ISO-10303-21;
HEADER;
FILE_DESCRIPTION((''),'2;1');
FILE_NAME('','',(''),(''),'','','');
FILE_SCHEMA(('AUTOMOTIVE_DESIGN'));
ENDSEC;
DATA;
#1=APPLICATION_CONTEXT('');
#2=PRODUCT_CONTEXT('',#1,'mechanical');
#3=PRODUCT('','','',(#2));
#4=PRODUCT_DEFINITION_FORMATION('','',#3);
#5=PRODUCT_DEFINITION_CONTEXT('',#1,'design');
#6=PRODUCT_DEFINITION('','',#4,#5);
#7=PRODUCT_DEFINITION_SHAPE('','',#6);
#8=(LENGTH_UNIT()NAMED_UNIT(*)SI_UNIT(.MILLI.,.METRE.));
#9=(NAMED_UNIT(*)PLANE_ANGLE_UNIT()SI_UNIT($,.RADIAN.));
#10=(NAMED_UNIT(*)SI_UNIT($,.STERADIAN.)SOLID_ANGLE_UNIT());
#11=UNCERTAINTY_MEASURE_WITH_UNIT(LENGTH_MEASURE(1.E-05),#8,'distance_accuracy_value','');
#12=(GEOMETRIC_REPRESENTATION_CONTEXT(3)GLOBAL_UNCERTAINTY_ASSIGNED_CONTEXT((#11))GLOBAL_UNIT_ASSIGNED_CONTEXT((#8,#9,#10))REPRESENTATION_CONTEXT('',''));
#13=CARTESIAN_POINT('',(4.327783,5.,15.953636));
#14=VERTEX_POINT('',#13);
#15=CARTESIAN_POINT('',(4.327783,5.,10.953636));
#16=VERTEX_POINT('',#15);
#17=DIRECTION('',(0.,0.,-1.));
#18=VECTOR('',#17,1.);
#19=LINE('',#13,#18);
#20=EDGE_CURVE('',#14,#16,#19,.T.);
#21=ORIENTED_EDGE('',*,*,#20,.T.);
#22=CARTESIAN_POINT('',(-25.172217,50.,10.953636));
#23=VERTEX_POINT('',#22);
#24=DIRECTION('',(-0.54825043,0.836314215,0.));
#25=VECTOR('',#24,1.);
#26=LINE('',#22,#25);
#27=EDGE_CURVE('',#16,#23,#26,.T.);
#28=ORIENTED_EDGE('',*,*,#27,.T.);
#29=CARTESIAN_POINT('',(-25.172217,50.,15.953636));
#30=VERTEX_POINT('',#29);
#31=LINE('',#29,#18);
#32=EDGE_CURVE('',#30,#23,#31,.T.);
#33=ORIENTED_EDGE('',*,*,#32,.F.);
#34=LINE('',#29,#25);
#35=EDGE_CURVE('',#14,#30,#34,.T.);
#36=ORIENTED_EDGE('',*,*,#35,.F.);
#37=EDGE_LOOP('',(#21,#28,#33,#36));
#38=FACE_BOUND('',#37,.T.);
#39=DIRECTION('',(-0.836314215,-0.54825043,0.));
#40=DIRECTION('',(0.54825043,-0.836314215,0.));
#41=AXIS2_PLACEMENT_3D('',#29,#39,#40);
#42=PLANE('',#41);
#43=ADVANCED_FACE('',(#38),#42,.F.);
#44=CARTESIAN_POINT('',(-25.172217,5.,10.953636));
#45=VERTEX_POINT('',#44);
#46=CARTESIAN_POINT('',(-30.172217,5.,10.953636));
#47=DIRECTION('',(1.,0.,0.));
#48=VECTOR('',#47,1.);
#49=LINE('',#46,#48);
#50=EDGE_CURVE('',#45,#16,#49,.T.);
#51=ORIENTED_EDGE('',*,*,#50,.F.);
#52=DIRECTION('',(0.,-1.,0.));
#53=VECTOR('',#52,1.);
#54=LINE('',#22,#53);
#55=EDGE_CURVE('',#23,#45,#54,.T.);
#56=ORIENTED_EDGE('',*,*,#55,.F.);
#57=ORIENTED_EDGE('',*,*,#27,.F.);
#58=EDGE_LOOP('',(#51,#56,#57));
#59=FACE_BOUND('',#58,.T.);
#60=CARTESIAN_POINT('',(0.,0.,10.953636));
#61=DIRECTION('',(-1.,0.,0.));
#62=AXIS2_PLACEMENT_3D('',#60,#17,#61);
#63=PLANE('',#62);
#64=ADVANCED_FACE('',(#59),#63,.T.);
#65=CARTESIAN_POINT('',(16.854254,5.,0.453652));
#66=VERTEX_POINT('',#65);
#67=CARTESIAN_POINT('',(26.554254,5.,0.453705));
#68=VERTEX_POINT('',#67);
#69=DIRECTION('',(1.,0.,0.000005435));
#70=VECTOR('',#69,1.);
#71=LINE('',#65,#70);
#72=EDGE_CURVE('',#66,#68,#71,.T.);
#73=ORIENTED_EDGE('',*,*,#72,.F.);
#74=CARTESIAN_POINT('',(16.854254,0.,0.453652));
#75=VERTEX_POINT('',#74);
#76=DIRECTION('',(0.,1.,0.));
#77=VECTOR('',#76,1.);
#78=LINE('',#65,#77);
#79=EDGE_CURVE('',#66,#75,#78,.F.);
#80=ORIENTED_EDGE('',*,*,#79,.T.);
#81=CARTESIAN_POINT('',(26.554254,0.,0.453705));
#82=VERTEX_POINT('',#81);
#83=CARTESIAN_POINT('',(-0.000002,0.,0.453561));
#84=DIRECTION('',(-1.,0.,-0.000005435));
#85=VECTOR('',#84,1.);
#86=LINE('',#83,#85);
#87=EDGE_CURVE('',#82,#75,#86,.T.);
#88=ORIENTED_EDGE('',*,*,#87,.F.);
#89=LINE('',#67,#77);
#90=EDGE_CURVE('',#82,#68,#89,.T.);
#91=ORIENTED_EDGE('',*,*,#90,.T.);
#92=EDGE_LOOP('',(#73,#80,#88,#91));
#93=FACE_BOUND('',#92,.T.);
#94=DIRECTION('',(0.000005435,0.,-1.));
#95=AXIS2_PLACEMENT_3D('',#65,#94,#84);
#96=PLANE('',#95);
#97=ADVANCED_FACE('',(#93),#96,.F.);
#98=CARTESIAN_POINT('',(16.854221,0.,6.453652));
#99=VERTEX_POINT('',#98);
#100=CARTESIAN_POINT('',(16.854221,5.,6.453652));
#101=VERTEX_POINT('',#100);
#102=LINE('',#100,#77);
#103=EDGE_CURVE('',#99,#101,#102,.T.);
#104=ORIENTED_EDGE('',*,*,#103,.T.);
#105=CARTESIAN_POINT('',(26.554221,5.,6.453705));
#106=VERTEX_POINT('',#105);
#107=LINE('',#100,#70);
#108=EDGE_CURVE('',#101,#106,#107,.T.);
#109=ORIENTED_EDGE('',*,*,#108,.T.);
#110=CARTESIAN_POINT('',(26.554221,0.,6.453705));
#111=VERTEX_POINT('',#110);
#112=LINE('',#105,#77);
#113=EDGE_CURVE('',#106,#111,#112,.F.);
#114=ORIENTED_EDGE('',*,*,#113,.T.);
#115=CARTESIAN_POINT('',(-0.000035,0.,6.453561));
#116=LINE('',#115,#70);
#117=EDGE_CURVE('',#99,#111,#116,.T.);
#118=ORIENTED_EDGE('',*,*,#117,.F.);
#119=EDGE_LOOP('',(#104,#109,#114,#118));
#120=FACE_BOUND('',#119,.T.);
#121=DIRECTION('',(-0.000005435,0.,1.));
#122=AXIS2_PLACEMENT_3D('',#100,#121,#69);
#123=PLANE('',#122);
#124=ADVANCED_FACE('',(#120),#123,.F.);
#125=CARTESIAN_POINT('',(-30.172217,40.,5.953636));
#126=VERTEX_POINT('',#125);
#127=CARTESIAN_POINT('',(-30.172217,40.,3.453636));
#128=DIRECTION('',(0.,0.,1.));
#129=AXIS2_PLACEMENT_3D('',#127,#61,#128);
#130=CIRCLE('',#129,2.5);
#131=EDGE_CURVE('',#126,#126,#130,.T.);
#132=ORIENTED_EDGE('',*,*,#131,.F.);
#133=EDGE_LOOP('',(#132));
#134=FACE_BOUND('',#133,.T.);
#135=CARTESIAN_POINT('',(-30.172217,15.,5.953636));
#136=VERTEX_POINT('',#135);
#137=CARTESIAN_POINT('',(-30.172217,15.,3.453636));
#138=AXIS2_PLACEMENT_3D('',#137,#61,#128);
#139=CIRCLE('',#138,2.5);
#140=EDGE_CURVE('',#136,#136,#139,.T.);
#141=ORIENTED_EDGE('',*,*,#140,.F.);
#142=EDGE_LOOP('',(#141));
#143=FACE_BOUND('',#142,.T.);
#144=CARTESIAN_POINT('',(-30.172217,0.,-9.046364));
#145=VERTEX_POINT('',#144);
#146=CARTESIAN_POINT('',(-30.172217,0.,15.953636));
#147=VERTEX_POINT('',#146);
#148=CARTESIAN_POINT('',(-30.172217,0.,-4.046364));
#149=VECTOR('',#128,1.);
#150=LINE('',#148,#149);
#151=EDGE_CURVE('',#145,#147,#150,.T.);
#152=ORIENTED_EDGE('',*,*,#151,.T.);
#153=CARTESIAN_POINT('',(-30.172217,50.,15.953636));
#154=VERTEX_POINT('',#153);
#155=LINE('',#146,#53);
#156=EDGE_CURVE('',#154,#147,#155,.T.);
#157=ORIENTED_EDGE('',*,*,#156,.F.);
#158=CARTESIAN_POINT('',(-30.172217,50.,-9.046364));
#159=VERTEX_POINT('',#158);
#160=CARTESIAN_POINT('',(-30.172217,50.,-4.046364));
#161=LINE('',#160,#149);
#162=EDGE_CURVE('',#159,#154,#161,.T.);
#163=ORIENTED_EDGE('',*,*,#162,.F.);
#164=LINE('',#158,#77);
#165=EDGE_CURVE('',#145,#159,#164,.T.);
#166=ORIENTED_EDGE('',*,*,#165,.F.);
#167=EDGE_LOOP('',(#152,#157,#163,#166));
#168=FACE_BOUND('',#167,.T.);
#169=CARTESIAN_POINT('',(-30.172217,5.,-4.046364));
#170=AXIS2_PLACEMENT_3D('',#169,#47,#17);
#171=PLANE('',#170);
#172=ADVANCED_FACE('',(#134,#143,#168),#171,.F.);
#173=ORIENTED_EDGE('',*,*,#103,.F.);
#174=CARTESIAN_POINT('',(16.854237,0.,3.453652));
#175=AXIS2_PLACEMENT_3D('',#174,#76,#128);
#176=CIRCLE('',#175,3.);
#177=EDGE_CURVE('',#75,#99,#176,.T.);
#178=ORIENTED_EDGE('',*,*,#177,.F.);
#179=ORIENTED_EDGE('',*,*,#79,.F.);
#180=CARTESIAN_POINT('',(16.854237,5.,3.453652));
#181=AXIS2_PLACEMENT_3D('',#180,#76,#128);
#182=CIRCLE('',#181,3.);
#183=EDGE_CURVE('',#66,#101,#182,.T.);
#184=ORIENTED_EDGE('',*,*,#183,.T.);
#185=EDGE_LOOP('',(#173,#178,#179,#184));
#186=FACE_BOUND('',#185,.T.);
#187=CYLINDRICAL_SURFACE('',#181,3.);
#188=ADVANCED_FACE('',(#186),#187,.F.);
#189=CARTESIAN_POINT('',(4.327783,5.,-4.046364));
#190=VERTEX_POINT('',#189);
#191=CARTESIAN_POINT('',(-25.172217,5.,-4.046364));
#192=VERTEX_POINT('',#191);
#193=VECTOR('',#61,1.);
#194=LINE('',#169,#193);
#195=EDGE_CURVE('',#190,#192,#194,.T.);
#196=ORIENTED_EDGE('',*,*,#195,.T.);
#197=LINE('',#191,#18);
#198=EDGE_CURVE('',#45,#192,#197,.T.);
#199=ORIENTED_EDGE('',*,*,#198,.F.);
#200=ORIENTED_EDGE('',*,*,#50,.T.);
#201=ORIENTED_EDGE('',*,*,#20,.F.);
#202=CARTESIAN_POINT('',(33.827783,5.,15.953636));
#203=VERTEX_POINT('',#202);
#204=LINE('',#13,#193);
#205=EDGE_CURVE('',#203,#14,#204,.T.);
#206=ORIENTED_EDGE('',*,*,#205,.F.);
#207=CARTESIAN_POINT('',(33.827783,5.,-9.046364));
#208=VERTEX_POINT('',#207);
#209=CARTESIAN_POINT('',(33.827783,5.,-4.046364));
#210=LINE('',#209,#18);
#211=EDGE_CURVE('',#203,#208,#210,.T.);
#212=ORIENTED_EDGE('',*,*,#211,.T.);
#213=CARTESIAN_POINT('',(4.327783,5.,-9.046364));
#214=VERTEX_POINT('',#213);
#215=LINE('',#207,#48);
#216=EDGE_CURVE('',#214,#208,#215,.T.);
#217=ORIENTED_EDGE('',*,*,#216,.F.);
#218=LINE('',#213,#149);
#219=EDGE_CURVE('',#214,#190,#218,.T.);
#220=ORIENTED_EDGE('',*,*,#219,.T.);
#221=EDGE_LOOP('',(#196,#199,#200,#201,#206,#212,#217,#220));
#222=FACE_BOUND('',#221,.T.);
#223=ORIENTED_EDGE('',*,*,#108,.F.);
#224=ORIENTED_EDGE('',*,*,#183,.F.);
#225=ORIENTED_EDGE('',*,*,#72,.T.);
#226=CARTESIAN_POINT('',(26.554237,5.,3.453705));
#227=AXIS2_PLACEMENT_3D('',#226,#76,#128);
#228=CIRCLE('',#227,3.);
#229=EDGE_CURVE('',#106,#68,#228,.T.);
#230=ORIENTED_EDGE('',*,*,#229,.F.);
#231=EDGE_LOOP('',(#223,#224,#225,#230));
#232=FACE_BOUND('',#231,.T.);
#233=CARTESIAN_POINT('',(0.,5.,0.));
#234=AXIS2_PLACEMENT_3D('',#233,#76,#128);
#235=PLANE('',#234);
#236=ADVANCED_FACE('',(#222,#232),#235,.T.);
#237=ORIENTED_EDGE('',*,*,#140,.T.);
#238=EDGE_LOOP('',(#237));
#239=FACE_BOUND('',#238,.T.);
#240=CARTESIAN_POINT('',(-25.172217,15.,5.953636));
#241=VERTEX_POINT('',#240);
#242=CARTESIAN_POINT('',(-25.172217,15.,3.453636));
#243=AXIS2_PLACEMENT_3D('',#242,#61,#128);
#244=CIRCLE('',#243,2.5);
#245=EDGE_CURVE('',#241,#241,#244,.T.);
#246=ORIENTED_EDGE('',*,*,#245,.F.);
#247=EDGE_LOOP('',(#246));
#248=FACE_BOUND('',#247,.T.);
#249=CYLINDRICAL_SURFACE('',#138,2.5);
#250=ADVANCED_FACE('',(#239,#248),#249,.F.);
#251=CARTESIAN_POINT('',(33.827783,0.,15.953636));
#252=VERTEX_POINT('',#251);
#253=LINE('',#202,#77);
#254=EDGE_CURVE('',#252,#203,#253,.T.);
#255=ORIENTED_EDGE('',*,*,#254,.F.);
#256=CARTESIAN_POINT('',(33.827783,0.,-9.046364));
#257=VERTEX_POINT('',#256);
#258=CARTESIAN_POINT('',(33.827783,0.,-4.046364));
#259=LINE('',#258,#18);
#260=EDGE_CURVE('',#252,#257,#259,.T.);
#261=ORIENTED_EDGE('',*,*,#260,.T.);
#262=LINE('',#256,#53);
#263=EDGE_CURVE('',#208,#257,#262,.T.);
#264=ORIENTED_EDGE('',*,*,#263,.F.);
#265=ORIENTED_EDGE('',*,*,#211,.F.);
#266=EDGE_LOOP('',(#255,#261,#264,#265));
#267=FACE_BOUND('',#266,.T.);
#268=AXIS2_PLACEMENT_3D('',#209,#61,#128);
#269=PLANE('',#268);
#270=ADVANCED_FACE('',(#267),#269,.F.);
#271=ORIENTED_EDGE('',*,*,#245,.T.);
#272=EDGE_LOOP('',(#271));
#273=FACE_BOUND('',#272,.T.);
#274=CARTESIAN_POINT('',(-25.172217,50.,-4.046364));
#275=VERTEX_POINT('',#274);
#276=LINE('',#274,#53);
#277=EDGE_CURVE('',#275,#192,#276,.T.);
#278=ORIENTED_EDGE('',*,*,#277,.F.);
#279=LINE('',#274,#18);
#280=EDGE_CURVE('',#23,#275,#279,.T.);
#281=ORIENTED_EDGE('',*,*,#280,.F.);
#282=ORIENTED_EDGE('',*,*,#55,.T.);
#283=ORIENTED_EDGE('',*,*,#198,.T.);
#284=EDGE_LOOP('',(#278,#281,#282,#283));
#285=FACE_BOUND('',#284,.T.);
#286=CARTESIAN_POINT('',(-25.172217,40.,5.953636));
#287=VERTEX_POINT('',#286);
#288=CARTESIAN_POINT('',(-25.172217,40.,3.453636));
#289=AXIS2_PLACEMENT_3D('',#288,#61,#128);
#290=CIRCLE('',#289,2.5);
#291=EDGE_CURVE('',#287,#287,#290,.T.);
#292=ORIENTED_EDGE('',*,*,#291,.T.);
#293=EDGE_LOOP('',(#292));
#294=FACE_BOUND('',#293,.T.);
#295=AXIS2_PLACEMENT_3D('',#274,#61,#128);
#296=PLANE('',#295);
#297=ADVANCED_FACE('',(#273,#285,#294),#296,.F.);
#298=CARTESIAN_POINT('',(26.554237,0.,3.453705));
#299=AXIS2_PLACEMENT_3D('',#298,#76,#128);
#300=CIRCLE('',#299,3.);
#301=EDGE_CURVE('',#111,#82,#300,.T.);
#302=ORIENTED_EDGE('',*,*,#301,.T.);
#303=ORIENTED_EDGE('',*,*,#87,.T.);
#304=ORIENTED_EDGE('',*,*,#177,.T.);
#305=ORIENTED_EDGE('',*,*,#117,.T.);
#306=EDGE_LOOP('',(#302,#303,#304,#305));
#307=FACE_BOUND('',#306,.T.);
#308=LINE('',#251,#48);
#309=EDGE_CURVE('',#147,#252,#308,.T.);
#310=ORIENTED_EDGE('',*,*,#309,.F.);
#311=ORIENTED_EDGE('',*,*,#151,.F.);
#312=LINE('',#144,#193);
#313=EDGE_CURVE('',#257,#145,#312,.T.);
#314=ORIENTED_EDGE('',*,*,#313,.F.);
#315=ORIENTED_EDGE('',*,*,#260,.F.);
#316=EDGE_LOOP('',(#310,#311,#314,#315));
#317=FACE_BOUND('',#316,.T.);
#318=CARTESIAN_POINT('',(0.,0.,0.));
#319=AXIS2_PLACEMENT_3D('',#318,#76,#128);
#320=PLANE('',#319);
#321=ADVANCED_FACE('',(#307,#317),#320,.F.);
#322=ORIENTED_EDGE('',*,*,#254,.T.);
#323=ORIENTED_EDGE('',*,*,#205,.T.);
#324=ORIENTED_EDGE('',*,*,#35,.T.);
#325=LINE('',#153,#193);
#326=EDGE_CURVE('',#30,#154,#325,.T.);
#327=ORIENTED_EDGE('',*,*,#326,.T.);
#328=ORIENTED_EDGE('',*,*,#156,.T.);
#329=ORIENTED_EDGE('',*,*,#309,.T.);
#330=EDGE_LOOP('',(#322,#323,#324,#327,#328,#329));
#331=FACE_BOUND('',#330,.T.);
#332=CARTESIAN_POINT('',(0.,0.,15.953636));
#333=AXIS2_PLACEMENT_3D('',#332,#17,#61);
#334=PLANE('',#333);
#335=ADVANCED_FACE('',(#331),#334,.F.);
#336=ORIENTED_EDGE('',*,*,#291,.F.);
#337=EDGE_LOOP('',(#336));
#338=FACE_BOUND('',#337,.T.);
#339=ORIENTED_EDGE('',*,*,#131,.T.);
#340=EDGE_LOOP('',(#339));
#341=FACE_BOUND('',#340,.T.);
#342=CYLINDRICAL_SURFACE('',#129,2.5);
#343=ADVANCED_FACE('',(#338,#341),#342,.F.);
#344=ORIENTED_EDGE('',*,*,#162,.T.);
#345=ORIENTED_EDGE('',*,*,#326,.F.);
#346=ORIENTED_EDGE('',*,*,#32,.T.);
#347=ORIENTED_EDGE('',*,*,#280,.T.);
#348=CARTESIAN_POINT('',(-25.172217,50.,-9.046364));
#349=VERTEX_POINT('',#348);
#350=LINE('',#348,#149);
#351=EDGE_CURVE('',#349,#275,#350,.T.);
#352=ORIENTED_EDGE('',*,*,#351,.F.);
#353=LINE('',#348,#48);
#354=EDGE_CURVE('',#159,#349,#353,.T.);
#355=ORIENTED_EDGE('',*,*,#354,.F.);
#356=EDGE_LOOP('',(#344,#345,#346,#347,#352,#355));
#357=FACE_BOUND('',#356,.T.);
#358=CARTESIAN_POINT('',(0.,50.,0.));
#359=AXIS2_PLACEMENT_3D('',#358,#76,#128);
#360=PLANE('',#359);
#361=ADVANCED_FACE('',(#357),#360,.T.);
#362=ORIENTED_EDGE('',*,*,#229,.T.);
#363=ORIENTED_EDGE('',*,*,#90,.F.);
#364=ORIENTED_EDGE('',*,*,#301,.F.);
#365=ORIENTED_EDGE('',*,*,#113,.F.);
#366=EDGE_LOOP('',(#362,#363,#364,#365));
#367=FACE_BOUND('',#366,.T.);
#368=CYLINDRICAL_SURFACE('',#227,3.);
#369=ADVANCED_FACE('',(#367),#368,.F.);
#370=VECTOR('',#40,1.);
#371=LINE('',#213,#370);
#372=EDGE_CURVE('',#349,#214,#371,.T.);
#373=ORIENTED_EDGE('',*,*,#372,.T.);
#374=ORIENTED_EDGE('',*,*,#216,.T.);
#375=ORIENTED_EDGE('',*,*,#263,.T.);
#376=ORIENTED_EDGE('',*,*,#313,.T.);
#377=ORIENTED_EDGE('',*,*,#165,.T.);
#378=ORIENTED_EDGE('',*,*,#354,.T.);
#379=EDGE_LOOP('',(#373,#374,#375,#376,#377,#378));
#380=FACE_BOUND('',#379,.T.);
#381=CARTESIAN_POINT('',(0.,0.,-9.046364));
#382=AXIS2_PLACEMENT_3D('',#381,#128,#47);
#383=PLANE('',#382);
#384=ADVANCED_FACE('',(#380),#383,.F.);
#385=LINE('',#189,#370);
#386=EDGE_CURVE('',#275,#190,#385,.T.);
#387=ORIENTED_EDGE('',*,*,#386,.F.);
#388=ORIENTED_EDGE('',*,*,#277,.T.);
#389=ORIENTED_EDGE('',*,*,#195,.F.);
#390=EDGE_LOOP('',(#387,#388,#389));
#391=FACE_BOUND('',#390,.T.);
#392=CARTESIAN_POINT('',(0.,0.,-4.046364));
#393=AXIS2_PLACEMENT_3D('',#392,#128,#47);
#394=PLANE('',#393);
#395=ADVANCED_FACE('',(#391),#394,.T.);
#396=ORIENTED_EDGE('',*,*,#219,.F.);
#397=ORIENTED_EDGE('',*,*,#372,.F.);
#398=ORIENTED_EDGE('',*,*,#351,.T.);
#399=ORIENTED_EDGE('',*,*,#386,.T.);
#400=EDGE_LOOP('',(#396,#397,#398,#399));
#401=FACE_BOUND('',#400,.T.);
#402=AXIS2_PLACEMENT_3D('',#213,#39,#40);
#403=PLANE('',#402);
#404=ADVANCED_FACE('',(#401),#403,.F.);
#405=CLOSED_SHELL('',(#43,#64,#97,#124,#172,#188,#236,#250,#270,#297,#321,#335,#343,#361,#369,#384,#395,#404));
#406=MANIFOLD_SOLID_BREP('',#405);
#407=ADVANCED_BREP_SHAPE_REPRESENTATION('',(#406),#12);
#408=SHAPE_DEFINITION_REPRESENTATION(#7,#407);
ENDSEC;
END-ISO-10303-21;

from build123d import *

# Parameters (mm, degrees)
SKETCH1_W                 = 64
SKETCH1_H                 = 15
BOSS_EXTRUDE1_DEPTH       = 5
SKETCH3_W                 = 5
SKETCH3_H                 = 15
BOSS_EXTRUDE2_DEPTH       = 45
F_5_0MM_DOWEL_HOLE1_D     = 5
F_6_0MM_DOWEL_SLOT1_DEPTH = 5
BOSS_EXTRUDE3_DEPTH       = 5
BOSS_EXTRUDE4_DEPTH       = 5


# Read off the part's stored shape, not the designer's step: Ø6.0mm Dowel Slot1
with BuildPart() as part:
    # Sketch1 → Boss-Extrude1 (new body)
    with BuildSketch(Plane(origin=(0, 0, 0), x_dir=(1, 0, 0), z_dir=(0, 1, 0))):
        with Locations((1.827783478, -3.453636176)):
            Rectangle(SKETCH1_W, SKETCH1_H)
    extrude(amount=BOSS_EXTRUDE1_DEPTH)

    # Sketch3 → Boss-Extrude2 (add)
    with BuildSketch(Plane(origin=(0, 5, 0), x_dir=(1, 0, 0), z_dir=(0, 1, 0))):
        with Locations((-27.672216522, -3.453636176)):
            Rectangle(SKETCH3_W, SKETCH3_H)
    extrude(amount=BOSS_EXTRUDE2_DEPTH)

    # Ø5.0mm Dowel Hole1 (through all)
    with Locations(Plane.ZY.offset(30.172216522)):
        with Locations((3.453636176, 15), (3.453636176, 40)):
            Hole(F_5_0MM_DOWEL_HOLE1_D / 2)

    # Ø6.0mm Dowel Slot1 outline → Ø6.0mm Dowel Slot1 (cut)
    with BuildSketch(Plane(origin=(0, 0, 0), x_dir=(1, 0, 0), z_dir=(0, 1, 0))):
        with BuildLine():
            Line((16.854220924, -6.453652479), (26.554220923, -6.453705194))
            ThreePointArc((26.554220923, -6.453705194), (29.554237227, -3.453721498), (26.554253531, -0.453705194))
            Line((26.554253531, -0.453705194), (16.854253531, -0.453652479))
            ThreePointArc((16.854253531, -0.453652479), (13.854237227, -3.453636175), (16.854220924, -6.453652479))
        make_face()
    extrude(amount=F_6_0MM_DOWEL_SLOT1_DEPTH, mode=Mode.SUBTRACT)

    # Sketch10 → Boss-Extrude3 (add)
    with BuildSketch(Plane.XY.offset(10.953636176)):
        Polygon((-25.172216522, 50), (4.327783478, 5), (33.827783478, 5), (33.827783478, 0), (-30.172216522, 0), (-30.172216522, 50), align=None)
    extrude(amount=BOSS_EXTRUDE3_DEPTH)

    # Sketch11 → Boss-Extrude4 (add)
    with BuildSketch(Plane(origin=(0, 0, -4.046363824), x_dir=(-1, 0, 0), z_dir=(0, 0, -1))):
        Polygon((25.172216522, 50), (30.172216522, 50), (30.172216522, 0), (-33.827783478, 0), (-33.827783478, 5), (-4.327783478, 5), align=None)
    extrude(amount=BOSS_EXTRUDE4_DEPTH)


solid = part.part
